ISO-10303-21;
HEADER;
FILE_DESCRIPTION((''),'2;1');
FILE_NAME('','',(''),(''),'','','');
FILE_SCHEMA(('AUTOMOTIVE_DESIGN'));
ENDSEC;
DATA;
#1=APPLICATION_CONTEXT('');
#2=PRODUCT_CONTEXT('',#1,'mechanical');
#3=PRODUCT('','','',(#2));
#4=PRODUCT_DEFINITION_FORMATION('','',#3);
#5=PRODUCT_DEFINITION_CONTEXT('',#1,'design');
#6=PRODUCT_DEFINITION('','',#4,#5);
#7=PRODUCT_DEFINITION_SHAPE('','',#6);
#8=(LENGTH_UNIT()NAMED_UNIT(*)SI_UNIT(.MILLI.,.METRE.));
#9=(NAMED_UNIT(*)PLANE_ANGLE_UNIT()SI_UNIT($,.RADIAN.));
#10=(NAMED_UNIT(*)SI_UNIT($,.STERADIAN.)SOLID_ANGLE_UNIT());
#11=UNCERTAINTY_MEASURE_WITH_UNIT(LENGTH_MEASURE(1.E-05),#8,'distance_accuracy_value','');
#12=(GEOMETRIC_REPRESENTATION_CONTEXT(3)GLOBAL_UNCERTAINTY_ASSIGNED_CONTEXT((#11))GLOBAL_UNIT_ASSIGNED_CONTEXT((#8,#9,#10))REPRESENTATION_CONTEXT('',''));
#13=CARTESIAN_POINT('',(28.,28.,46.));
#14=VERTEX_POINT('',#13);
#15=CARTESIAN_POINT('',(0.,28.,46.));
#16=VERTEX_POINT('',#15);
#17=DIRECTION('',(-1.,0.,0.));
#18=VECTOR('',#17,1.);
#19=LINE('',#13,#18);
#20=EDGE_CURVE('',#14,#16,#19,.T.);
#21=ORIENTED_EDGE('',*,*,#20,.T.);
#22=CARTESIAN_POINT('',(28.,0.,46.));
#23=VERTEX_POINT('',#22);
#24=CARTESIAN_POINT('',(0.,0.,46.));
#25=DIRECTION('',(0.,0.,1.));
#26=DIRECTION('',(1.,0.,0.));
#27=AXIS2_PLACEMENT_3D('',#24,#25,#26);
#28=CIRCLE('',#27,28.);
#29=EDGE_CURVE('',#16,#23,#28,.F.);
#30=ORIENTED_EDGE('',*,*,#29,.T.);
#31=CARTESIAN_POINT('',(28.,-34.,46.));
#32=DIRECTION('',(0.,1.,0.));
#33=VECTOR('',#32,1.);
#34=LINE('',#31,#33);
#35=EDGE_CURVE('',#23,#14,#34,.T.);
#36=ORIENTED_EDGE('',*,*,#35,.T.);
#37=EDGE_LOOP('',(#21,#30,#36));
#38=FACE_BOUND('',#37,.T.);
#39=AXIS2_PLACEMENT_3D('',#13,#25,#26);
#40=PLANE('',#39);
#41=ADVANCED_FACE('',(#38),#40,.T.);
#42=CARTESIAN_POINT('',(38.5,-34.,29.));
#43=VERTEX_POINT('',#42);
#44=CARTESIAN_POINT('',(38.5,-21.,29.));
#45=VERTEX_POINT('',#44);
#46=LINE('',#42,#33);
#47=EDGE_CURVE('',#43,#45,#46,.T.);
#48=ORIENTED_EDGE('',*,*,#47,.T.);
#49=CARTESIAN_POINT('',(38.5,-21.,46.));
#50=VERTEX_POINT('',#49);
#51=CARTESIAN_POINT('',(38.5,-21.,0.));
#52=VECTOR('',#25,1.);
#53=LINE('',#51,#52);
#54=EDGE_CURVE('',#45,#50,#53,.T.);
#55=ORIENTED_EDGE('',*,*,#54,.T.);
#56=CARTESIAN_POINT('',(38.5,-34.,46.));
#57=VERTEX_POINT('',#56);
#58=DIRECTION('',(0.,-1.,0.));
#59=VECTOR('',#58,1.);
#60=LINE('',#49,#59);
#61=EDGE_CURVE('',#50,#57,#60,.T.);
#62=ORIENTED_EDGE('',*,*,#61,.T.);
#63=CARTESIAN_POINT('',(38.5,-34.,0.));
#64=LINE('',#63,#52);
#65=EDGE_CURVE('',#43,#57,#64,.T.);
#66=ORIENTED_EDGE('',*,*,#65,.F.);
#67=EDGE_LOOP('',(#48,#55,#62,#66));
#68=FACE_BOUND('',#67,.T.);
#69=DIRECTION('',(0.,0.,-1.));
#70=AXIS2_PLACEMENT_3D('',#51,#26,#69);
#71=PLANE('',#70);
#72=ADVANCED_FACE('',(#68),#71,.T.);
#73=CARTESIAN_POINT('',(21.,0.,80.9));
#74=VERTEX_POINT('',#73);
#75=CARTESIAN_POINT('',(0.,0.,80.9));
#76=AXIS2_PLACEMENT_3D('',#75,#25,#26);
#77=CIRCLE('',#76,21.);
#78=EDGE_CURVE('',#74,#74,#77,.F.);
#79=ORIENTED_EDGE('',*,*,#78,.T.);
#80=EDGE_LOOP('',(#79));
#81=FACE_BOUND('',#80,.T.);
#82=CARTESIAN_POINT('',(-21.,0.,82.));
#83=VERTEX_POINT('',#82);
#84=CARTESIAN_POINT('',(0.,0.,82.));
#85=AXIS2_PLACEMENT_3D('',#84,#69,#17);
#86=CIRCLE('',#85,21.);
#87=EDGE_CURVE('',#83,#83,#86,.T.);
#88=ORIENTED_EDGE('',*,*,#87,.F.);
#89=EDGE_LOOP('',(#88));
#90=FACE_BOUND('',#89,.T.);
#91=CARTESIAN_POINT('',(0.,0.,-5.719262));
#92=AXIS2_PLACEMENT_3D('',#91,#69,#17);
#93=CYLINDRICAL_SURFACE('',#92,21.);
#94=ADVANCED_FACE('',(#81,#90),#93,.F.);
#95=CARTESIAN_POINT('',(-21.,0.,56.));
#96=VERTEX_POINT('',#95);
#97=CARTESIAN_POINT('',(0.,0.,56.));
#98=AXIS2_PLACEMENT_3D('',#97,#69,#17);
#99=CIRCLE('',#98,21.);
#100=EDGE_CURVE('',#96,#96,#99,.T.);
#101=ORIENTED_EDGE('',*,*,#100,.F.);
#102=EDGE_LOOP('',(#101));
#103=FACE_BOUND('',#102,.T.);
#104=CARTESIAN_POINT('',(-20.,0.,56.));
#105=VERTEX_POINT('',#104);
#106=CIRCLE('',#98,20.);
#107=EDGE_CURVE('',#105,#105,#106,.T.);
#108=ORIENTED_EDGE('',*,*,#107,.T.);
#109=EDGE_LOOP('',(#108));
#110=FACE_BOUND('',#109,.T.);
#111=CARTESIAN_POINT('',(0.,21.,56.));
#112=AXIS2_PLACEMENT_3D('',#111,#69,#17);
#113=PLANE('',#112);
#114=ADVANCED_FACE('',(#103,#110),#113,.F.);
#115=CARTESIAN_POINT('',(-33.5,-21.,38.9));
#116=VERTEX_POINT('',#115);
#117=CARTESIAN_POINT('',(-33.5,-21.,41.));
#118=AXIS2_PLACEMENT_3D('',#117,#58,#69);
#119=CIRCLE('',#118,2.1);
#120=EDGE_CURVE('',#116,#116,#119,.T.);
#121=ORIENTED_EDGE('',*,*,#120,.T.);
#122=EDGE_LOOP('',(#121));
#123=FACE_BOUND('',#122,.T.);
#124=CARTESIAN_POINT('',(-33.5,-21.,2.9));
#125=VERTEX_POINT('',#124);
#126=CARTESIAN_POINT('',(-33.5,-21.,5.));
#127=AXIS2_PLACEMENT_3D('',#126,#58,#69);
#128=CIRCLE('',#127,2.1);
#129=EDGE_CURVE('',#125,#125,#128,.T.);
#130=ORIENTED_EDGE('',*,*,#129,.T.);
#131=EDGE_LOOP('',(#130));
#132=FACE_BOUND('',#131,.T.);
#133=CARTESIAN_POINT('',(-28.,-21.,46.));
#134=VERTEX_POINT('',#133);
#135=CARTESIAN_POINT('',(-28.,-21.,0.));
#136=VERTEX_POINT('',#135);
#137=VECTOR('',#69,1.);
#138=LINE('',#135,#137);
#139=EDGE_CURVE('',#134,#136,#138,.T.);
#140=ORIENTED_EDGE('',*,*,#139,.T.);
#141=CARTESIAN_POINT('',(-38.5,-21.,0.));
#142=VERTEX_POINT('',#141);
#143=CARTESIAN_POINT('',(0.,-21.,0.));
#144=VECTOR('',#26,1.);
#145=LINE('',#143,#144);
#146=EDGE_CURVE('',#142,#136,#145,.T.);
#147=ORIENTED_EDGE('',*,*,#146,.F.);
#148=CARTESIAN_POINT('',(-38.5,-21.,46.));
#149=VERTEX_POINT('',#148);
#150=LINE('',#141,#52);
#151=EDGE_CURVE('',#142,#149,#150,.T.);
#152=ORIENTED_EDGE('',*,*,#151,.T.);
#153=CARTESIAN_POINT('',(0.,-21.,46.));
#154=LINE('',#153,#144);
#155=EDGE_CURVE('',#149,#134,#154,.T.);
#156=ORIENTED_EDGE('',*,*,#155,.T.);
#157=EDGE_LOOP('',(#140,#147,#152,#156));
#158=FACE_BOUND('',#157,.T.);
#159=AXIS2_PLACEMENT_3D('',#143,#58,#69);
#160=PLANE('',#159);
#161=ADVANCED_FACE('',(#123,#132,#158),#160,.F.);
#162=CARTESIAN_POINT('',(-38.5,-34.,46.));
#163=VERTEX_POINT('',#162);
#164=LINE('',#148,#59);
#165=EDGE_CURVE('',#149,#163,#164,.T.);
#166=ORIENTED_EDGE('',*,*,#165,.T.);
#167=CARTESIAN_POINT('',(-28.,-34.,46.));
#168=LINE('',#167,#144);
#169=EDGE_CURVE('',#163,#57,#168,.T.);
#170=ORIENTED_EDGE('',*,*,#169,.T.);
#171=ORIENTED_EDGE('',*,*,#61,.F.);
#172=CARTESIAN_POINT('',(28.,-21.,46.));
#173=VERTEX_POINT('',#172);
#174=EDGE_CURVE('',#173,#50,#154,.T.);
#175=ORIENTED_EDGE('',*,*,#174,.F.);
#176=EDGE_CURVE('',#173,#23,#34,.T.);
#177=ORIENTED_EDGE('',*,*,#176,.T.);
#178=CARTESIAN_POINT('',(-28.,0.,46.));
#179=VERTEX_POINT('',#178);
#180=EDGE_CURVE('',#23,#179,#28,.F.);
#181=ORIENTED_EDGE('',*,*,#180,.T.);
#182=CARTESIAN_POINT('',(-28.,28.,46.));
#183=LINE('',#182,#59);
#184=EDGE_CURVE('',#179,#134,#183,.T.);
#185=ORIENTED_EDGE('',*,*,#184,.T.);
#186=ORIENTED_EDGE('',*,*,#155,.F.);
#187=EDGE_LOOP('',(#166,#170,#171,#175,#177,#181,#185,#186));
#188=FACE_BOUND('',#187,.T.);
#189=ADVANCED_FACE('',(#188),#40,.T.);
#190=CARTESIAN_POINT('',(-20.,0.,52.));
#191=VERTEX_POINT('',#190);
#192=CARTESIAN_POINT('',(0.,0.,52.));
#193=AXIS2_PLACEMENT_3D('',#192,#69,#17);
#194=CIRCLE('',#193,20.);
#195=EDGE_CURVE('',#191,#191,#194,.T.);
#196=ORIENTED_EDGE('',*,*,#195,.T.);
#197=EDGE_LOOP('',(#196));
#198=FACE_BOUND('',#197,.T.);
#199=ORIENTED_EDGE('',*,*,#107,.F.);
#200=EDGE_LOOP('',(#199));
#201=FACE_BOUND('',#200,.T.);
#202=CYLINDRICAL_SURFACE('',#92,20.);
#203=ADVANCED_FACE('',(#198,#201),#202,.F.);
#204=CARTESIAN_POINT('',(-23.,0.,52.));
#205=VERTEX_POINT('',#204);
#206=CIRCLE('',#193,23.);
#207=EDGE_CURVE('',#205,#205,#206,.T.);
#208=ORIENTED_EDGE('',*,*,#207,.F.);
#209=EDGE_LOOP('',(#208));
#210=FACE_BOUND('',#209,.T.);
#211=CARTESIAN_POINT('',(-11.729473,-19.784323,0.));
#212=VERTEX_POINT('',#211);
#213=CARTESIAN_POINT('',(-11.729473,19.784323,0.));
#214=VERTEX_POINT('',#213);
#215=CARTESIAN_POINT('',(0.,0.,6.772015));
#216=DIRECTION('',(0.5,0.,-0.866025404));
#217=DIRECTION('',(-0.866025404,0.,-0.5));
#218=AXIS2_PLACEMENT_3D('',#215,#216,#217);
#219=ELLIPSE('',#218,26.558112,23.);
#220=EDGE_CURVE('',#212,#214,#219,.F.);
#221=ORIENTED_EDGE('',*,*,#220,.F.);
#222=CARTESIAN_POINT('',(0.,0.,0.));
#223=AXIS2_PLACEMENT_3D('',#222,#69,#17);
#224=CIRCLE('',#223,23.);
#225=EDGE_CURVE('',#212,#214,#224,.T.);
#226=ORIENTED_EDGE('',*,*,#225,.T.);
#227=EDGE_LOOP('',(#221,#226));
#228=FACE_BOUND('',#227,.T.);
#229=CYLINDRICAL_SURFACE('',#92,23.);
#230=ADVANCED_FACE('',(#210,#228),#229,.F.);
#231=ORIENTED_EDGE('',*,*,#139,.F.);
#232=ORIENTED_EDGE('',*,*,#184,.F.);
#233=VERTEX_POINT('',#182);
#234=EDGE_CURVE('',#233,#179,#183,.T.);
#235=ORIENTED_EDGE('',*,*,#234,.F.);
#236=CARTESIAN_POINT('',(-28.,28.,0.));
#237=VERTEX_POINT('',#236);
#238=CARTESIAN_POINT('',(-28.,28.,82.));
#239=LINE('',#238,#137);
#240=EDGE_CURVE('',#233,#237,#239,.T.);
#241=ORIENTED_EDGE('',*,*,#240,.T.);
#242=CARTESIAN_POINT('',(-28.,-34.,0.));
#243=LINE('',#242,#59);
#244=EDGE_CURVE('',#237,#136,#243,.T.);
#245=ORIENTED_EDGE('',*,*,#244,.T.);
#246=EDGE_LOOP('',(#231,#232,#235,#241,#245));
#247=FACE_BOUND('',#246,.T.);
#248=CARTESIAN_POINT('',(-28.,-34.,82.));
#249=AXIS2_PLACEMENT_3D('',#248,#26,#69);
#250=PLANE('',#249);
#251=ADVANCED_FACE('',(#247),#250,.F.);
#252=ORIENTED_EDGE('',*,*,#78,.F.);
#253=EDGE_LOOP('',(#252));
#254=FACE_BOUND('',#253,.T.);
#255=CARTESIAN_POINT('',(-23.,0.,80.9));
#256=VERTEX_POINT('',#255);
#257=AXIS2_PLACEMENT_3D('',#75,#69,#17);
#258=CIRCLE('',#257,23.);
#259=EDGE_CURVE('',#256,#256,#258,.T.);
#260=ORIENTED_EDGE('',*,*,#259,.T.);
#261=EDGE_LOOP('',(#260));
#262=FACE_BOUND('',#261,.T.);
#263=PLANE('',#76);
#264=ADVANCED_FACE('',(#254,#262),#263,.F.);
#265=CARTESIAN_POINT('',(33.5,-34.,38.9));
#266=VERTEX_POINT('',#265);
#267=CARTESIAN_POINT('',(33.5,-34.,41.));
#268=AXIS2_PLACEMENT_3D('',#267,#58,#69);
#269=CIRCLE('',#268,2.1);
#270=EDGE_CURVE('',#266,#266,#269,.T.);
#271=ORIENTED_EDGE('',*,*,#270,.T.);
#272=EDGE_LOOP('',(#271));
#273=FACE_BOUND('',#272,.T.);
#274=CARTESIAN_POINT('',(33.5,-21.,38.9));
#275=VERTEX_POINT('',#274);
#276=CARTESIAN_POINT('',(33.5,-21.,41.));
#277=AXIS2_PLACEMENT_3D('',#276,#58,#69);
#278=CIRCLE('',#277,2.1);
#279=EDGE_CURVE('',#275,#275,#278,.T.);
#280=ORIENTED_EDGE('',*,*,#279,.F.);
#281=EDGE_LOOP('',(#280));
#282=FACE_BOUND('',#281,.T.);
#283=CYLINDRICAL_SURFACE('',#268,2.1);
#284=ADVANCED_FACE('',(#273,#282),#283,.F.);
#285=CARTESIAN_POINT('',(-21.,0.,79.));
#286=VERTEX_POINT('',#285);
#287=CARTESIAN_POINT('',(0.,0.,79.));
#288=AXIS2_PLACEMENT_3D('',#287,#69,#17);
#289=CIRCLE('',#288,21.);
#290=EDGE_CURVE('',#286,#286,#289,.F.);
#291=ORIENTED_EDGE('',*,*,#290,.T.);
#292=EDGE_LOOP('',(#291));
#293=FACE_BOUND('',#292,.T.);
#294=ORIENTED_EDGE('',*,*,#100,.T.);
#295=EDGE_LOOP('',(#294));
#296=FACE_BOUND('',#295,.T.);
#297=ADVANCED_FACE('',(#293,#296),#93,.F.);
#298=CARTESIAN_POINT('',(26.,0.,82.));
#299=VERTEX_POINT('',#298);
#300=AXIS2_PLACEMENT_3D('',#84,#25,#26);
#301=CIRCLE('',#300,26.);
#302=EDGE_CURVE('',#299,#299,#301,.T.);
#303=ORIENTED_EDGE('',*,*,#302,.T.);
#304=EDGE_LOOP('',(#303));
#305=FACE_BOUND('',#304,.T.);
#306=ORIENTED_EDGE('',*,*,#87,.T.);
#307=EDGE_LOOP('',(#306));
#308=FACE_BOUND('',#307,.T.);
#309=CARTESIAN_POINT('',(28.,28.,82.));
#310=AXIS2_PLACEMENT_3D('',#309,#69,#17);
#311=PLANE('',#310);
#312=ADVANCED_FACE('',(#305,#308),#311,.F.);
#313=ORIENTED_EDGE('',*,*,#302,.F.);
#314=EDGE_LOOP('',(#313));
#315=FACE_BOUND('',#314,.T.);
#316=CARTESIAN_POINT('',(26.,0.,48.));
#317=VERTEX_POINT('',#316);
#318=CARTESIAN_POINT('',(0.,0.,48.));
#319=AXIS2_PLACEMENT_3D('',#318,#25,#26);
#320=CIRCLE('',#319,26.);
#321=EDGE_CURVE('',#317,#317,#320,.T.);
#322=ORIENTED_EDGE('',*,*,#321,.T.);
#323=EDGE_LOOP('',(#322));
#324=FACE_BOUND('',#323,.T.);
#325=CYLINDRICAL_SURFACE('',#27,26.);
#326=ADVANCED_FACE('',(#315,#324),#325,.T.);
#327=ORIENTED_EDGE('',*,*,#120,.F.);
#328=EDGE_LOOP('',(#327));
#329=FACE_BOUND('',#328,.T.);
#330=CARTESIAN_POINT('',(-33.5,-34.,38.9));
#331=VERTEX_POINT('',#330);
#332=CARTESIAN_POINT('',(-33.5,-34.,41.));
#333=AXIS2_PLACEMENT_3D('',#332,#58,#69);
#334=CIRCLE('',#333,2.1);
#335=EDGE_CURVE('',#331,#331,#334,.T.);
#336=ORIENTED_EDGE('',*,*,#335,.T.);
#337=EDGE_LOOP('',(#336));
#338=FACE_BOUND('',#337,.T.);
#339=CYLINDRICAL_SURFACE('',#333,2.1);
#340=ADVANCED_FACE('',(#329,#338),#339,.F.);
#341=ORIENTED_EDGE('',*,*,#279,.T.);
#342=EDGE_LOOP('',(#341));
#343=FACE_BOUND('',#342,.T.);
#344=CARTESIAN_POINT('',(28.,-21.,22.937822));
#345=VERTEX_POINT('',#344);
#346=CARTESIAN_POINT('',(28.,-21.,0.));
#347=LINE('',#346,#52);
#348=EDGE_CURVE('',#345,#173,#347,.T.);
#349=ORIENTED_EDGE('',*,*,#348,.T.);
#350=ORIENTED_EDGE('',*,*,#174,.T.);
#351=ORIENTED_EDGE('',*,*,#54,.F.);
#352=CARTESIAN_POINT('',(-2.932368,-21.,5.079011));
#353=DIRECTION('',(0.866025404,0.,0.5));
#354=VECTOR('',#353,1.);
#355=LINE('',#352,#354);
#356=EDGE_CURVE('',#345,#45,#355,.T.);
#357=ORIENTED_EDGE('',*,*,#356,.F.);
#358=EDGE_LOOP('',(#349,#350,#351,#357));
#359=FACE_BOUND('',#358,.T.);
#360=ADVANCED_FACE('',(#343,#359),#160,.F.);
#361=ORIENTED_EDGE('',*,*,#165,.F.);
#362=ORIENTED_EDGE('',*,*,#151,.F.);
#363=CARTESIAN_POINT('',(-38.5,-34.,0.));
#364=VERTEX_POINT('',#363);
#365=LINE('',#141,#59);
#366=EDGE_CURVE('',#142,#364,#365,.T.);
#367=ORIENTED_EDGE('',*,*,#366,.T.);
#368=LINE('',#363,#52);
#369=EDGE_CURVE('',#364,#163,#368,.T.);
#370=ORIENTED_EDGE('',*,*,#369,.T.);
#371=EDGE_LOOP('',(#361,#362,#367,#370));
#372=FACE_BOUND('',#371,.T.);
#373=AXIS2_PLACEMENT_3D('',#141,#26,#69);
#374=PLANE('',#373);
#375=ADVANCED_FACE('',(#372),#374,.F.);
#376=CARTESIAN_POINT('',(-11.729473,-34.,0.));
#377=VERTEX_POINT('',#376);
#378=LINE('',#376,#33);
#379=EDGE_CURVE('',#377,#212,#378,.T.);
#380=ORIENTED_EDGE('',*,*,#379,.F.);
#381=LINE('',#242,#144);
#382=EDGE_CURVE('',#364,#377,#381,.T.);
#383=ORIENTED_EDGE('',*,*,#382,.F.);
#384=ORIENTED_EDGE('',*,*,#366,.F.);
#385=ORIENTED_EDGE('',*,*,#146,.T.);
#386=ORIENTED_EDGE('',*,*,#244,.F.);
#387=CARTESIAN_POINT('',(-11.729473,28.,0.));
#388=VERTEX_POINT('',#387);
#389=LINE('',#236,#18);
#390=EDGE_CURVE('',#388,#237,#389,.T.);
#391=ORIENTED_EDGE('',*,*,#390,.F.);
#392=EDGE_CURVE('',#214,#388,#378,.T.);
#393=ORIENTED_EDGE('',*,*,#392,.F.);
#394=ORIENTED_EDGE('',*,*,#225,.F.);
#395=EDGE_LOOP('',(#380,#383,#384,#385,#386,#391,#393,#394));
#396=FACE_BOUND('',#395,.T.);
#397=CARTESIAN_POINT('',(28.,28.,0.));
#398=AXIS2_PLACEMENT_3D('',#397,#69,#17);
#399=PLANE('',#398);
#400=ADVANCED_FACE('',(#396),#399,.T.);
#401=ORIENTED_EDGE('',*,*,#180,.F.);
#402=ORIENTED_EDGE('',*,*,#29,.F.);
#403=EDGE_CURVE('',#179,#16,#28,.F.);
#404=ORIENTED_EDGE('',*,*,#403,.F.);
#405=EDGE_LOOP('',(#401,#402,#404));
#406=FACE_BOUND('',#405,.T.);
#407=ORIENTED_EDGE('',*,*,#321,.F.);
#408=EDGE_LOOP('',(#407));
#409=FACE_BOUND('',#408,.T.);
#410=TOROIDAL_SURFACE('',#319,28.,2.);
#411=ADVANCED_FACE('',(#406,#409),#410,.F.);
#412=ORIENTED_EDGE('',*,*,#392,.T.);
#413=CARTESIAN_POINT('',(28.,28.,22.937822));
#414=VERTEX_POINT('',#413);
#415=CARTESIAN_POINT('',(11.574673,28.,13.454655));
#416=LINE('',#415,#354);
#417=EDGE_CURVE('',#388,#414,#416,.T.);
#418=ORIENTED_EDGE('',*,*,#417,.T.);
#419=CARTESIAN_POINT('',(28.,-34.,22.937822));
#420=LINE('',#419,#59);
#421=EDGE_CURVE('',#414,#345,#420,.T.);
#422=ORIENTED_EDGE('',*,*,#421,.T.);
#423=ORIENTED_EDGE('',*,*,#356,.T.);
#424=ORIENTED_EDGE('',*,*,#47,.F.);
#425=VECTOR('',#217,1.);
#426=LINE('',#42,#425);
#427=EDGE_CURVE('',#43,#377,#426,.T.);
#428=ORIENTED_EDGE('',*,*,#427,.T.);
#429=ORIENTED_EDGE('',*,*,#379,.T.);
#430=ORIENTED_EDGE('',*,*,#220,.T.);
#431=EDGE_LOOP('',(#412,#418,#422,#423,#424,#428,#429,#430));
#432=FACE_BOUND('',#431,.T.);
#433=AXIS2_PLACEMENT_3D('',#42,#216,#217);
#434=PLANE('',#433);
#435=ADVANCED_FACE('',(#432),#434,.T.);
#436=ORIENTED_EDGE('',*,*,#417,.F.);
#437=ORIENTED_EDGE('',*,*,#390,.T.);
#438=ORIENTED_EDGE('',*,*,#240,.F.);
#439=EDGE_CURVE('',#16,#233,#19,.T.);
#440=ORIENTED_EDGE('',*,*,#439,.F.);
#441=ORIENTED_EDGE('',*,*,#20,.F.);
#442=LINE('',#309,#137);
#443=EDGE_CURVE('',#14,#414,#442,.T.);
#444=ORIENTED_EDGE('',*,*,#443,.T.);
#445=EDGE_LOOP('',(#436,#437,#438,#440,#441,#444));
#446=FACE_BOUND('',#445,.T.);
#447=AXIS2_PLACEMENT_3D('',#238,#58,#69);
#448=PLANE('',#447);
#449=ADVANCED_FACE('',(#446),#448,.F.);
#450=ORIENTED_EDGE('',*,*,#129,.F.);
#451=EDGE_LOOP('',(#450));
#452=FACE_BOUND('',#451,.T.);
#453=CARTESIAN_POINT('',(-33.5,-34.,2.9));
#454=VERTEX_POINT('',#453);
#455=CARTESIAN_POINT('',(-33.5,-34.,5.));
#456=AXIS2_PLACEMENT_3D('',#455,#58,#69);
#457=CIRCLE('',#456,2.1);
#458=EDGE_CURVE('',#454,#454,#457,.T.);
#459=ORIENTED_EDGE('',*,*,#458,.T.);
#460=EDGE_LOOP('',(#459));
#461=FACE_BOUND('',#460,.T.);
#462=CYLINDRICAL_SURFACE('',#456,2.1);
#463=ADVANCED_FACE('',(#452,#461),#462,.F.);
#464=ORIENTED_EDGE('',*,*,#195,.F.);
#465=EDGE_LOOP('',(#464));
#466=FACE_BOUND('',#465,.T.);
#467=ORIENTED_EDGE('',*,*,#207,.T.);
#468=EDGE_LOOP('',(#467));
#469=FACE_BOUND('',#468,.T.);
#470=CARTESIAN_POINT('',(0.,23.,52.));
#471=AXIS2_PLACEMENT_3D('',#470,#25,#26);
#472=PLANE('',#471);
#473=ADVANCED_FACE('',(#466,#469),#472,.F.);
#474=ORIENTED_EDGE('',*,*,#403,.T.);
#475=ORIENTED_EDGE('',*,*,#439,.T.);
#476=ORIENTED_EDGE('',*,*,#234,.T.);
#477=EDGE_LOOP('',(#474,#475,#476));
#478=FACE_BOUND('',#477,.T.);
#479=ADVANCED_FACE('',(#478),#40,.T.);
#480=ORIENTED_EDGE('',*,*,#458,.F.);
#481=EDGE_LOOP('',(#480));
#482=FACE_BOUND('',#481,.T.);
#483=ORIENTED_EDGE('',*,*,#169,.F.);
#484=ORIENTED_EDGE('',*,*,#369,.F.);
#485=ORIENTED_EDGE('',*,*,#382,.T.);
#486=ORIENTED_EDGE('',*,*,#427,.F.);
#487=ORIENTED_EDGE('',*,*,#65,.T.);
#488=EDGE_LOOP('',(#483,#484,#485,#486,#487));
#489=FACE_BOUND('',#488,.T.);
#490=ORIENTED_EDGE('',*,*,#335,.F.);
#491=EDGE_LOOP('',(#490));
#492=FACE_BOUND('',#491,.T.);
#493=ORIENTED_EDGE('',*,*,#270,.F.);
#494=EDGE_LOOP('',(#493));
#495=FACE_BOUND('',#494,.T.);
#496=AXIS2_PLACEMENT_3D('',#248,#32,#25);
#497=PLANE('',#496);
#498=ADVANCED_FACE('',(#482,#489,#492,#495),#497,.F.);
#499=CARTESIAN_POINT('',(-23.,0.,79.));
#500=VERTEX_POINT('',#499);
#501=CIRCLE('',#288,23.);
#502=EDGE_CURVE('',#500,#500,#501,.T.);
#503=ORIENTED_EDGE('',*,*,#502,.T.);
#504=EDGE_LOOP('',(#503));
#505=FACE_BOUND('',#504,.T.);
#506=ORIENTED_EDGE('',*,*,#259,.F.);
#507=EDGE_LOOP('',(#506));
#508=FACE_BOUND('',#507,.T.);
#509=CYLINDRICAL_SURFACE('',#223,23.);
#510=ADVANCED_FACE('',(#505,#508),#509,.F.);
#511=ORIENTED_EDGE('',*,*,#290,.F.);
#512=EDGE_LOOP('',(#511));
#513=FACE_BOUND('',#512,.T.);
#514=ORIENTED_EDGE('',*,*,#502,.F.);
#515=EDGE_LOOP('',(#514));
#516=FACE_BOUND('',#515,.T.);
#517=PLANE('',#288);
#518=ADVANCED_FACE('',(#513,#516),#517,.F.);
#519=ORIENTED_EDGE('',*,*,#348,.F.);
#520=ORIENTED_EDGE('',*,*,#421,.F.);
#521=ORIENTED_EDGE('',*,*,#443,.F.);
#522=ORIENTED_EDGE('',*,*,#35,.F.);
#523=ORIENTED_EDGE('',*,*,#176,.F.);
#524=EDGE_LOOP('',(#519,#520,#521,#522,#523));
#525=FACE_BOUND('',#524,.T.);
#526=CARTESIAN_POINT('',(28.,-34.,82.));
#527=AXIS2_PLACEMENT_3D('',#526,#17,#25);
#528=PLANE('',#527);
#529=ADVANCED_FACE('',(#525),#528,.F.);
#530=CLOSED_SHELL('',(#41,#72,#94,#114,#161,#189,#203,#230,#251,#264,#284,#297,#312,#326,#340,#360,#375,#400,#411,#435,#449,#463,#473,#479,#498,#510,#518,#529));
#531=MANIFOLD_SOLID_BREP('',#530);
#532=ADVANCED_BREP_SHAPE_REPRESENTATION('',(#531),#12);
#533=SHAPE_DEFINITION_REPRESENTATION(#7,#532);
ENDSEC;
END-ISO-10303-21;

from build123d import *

# Parameters (mm, degrees)
SKETCH_1_W          = 56
SKETCH_1_H          = 62
EXTRUDE_1_DEPTH     = 82
SKETCH_4_W          = 56
SKETCH_4_H          = 62
SKETCH_4_R          = 26
CUT_EXTRUDE_1_DEPTH = 36
SKETCH_15_W         = 23
SKETCH_15_H         = 1.9
FILLET_1_R          = 2
SKETCH_19_W         = 10.5
SKETCH_19_H         = 46
EXTRUDE_2_DEPTH     = 13
CUT_EXTRUDE_2_DEPTH = 110.773630713
HOLE_WIZARD_M5_1_D  = 4.2


with BuildPart() as part:
    # 草图1 → 凸台-拉伸1 (new body)
    with BuildSketch(Plane.XY):
        with Locations((0, -3)):
            Rectangle(SKETCH_1_W, SKETCH_1_H)
    extrude(amount=EXTRUDE_1_DEPTH)

    # 草图3 → 切除-旋转2 (revolve, cut)
    with BuildSketch(Plane(origin=(0, 0, 0), x_dir=(0, 0, -1), z_dir=(1, 0, 0)), mode=Mode.PRIVATE) as cut_revolve_2_sk:
        Polygon((-82, 0), (0, 0), (0, 23), (-52, 23), (-52, 20), (-56, 20), (-56, 21), (-82, 21), align=None)
    revolve(cut_revolve_2_sk.sketch.rotate(Axis((0, 0, -5.719261836), (0, 0, 1)), 90), axis=Axis((0, 0, -5.719261836), (0, 0, 1)), mode=Mode.SUBTRACT)

    # 草图4 → 切除-拉伸1 (cut)
    with BuildSketch(Plane.XY.offset(82)):
        with Locations((0, -3)):
            Rectangle(SKETCH_4_W, SKETCH_4_H)
        Circle(SKETCH_4_R, mode=Mode.SUBTRACT)
    extrude(amount=-CUT_EXTRUDE_1_DEPTH, mode=Mode.SUBTRACT)

    # 草图15 → 切除-旋转3 (revolve, cut)
    with BuildSketch(Plane(origin=(0, 0, 0), x_dir=(1, 0, 0), z_dir=(0, 1, 0))):
        with Locations((-11.5, -79.95)):
            Rectangle(SKETCH_15_W, SKETCH_15_H)
    revolve(axis=Axis((0, 0, 0), (0, 0, 1)), mode=Mode.SUBTRACT)

    # 圆角1
    fillet_1_edges = [part.edges().sort_by_distance(p)[0] for p in [
        (-26, 0, 46),
    ]]
    fillet(fillet_1_edges, radius=FILLET_1_R - 0.0001)  # a hair under: the kernel refuses the full size

    # 草图19 → 凸台-拉伸2 (add)
    with BuildSketch(Plane.XZ.offset(34)):
        with Locations((33.25, 23)):
            Rectangle(SKETCH_19_W, SKETCH_19_H)
        with Locations((-33.25, 23)):
            Rectangle(SKETCH_19_W, SKETCH_19_H)
    extrude(amount=-EXTRUDE_2_DEPTH)

    # 草图25 → 切除-拉伸2 (cut, through all)
    with BuildSketch(Plane.XZ.offset(34)):
        Polygon((213.716550827, 130.161322786), (38.5, 29), (-11.729473419, 0), (-186.946024246, -101.161322786), (15.376621326, -451.59442444), (416.039196399, -220.271778867), align=None)
    extrude(amount=-CUT_EXTRUDE_2_DEPTH, mode=Mode.SUBTRACT)

    # M5 螺纹孔1 (through all)
    with Locations(Plane(origin=(0, -34, 0), x_dir=(-1, 0, 0), z_dir=(0, -1, 0))):
        with Locations((33.5, -5), (-33.5, -41), (33.5, -41)):
            Hole(HOLE_WIZARD_M5_1_D / 2)


solid = part.part
